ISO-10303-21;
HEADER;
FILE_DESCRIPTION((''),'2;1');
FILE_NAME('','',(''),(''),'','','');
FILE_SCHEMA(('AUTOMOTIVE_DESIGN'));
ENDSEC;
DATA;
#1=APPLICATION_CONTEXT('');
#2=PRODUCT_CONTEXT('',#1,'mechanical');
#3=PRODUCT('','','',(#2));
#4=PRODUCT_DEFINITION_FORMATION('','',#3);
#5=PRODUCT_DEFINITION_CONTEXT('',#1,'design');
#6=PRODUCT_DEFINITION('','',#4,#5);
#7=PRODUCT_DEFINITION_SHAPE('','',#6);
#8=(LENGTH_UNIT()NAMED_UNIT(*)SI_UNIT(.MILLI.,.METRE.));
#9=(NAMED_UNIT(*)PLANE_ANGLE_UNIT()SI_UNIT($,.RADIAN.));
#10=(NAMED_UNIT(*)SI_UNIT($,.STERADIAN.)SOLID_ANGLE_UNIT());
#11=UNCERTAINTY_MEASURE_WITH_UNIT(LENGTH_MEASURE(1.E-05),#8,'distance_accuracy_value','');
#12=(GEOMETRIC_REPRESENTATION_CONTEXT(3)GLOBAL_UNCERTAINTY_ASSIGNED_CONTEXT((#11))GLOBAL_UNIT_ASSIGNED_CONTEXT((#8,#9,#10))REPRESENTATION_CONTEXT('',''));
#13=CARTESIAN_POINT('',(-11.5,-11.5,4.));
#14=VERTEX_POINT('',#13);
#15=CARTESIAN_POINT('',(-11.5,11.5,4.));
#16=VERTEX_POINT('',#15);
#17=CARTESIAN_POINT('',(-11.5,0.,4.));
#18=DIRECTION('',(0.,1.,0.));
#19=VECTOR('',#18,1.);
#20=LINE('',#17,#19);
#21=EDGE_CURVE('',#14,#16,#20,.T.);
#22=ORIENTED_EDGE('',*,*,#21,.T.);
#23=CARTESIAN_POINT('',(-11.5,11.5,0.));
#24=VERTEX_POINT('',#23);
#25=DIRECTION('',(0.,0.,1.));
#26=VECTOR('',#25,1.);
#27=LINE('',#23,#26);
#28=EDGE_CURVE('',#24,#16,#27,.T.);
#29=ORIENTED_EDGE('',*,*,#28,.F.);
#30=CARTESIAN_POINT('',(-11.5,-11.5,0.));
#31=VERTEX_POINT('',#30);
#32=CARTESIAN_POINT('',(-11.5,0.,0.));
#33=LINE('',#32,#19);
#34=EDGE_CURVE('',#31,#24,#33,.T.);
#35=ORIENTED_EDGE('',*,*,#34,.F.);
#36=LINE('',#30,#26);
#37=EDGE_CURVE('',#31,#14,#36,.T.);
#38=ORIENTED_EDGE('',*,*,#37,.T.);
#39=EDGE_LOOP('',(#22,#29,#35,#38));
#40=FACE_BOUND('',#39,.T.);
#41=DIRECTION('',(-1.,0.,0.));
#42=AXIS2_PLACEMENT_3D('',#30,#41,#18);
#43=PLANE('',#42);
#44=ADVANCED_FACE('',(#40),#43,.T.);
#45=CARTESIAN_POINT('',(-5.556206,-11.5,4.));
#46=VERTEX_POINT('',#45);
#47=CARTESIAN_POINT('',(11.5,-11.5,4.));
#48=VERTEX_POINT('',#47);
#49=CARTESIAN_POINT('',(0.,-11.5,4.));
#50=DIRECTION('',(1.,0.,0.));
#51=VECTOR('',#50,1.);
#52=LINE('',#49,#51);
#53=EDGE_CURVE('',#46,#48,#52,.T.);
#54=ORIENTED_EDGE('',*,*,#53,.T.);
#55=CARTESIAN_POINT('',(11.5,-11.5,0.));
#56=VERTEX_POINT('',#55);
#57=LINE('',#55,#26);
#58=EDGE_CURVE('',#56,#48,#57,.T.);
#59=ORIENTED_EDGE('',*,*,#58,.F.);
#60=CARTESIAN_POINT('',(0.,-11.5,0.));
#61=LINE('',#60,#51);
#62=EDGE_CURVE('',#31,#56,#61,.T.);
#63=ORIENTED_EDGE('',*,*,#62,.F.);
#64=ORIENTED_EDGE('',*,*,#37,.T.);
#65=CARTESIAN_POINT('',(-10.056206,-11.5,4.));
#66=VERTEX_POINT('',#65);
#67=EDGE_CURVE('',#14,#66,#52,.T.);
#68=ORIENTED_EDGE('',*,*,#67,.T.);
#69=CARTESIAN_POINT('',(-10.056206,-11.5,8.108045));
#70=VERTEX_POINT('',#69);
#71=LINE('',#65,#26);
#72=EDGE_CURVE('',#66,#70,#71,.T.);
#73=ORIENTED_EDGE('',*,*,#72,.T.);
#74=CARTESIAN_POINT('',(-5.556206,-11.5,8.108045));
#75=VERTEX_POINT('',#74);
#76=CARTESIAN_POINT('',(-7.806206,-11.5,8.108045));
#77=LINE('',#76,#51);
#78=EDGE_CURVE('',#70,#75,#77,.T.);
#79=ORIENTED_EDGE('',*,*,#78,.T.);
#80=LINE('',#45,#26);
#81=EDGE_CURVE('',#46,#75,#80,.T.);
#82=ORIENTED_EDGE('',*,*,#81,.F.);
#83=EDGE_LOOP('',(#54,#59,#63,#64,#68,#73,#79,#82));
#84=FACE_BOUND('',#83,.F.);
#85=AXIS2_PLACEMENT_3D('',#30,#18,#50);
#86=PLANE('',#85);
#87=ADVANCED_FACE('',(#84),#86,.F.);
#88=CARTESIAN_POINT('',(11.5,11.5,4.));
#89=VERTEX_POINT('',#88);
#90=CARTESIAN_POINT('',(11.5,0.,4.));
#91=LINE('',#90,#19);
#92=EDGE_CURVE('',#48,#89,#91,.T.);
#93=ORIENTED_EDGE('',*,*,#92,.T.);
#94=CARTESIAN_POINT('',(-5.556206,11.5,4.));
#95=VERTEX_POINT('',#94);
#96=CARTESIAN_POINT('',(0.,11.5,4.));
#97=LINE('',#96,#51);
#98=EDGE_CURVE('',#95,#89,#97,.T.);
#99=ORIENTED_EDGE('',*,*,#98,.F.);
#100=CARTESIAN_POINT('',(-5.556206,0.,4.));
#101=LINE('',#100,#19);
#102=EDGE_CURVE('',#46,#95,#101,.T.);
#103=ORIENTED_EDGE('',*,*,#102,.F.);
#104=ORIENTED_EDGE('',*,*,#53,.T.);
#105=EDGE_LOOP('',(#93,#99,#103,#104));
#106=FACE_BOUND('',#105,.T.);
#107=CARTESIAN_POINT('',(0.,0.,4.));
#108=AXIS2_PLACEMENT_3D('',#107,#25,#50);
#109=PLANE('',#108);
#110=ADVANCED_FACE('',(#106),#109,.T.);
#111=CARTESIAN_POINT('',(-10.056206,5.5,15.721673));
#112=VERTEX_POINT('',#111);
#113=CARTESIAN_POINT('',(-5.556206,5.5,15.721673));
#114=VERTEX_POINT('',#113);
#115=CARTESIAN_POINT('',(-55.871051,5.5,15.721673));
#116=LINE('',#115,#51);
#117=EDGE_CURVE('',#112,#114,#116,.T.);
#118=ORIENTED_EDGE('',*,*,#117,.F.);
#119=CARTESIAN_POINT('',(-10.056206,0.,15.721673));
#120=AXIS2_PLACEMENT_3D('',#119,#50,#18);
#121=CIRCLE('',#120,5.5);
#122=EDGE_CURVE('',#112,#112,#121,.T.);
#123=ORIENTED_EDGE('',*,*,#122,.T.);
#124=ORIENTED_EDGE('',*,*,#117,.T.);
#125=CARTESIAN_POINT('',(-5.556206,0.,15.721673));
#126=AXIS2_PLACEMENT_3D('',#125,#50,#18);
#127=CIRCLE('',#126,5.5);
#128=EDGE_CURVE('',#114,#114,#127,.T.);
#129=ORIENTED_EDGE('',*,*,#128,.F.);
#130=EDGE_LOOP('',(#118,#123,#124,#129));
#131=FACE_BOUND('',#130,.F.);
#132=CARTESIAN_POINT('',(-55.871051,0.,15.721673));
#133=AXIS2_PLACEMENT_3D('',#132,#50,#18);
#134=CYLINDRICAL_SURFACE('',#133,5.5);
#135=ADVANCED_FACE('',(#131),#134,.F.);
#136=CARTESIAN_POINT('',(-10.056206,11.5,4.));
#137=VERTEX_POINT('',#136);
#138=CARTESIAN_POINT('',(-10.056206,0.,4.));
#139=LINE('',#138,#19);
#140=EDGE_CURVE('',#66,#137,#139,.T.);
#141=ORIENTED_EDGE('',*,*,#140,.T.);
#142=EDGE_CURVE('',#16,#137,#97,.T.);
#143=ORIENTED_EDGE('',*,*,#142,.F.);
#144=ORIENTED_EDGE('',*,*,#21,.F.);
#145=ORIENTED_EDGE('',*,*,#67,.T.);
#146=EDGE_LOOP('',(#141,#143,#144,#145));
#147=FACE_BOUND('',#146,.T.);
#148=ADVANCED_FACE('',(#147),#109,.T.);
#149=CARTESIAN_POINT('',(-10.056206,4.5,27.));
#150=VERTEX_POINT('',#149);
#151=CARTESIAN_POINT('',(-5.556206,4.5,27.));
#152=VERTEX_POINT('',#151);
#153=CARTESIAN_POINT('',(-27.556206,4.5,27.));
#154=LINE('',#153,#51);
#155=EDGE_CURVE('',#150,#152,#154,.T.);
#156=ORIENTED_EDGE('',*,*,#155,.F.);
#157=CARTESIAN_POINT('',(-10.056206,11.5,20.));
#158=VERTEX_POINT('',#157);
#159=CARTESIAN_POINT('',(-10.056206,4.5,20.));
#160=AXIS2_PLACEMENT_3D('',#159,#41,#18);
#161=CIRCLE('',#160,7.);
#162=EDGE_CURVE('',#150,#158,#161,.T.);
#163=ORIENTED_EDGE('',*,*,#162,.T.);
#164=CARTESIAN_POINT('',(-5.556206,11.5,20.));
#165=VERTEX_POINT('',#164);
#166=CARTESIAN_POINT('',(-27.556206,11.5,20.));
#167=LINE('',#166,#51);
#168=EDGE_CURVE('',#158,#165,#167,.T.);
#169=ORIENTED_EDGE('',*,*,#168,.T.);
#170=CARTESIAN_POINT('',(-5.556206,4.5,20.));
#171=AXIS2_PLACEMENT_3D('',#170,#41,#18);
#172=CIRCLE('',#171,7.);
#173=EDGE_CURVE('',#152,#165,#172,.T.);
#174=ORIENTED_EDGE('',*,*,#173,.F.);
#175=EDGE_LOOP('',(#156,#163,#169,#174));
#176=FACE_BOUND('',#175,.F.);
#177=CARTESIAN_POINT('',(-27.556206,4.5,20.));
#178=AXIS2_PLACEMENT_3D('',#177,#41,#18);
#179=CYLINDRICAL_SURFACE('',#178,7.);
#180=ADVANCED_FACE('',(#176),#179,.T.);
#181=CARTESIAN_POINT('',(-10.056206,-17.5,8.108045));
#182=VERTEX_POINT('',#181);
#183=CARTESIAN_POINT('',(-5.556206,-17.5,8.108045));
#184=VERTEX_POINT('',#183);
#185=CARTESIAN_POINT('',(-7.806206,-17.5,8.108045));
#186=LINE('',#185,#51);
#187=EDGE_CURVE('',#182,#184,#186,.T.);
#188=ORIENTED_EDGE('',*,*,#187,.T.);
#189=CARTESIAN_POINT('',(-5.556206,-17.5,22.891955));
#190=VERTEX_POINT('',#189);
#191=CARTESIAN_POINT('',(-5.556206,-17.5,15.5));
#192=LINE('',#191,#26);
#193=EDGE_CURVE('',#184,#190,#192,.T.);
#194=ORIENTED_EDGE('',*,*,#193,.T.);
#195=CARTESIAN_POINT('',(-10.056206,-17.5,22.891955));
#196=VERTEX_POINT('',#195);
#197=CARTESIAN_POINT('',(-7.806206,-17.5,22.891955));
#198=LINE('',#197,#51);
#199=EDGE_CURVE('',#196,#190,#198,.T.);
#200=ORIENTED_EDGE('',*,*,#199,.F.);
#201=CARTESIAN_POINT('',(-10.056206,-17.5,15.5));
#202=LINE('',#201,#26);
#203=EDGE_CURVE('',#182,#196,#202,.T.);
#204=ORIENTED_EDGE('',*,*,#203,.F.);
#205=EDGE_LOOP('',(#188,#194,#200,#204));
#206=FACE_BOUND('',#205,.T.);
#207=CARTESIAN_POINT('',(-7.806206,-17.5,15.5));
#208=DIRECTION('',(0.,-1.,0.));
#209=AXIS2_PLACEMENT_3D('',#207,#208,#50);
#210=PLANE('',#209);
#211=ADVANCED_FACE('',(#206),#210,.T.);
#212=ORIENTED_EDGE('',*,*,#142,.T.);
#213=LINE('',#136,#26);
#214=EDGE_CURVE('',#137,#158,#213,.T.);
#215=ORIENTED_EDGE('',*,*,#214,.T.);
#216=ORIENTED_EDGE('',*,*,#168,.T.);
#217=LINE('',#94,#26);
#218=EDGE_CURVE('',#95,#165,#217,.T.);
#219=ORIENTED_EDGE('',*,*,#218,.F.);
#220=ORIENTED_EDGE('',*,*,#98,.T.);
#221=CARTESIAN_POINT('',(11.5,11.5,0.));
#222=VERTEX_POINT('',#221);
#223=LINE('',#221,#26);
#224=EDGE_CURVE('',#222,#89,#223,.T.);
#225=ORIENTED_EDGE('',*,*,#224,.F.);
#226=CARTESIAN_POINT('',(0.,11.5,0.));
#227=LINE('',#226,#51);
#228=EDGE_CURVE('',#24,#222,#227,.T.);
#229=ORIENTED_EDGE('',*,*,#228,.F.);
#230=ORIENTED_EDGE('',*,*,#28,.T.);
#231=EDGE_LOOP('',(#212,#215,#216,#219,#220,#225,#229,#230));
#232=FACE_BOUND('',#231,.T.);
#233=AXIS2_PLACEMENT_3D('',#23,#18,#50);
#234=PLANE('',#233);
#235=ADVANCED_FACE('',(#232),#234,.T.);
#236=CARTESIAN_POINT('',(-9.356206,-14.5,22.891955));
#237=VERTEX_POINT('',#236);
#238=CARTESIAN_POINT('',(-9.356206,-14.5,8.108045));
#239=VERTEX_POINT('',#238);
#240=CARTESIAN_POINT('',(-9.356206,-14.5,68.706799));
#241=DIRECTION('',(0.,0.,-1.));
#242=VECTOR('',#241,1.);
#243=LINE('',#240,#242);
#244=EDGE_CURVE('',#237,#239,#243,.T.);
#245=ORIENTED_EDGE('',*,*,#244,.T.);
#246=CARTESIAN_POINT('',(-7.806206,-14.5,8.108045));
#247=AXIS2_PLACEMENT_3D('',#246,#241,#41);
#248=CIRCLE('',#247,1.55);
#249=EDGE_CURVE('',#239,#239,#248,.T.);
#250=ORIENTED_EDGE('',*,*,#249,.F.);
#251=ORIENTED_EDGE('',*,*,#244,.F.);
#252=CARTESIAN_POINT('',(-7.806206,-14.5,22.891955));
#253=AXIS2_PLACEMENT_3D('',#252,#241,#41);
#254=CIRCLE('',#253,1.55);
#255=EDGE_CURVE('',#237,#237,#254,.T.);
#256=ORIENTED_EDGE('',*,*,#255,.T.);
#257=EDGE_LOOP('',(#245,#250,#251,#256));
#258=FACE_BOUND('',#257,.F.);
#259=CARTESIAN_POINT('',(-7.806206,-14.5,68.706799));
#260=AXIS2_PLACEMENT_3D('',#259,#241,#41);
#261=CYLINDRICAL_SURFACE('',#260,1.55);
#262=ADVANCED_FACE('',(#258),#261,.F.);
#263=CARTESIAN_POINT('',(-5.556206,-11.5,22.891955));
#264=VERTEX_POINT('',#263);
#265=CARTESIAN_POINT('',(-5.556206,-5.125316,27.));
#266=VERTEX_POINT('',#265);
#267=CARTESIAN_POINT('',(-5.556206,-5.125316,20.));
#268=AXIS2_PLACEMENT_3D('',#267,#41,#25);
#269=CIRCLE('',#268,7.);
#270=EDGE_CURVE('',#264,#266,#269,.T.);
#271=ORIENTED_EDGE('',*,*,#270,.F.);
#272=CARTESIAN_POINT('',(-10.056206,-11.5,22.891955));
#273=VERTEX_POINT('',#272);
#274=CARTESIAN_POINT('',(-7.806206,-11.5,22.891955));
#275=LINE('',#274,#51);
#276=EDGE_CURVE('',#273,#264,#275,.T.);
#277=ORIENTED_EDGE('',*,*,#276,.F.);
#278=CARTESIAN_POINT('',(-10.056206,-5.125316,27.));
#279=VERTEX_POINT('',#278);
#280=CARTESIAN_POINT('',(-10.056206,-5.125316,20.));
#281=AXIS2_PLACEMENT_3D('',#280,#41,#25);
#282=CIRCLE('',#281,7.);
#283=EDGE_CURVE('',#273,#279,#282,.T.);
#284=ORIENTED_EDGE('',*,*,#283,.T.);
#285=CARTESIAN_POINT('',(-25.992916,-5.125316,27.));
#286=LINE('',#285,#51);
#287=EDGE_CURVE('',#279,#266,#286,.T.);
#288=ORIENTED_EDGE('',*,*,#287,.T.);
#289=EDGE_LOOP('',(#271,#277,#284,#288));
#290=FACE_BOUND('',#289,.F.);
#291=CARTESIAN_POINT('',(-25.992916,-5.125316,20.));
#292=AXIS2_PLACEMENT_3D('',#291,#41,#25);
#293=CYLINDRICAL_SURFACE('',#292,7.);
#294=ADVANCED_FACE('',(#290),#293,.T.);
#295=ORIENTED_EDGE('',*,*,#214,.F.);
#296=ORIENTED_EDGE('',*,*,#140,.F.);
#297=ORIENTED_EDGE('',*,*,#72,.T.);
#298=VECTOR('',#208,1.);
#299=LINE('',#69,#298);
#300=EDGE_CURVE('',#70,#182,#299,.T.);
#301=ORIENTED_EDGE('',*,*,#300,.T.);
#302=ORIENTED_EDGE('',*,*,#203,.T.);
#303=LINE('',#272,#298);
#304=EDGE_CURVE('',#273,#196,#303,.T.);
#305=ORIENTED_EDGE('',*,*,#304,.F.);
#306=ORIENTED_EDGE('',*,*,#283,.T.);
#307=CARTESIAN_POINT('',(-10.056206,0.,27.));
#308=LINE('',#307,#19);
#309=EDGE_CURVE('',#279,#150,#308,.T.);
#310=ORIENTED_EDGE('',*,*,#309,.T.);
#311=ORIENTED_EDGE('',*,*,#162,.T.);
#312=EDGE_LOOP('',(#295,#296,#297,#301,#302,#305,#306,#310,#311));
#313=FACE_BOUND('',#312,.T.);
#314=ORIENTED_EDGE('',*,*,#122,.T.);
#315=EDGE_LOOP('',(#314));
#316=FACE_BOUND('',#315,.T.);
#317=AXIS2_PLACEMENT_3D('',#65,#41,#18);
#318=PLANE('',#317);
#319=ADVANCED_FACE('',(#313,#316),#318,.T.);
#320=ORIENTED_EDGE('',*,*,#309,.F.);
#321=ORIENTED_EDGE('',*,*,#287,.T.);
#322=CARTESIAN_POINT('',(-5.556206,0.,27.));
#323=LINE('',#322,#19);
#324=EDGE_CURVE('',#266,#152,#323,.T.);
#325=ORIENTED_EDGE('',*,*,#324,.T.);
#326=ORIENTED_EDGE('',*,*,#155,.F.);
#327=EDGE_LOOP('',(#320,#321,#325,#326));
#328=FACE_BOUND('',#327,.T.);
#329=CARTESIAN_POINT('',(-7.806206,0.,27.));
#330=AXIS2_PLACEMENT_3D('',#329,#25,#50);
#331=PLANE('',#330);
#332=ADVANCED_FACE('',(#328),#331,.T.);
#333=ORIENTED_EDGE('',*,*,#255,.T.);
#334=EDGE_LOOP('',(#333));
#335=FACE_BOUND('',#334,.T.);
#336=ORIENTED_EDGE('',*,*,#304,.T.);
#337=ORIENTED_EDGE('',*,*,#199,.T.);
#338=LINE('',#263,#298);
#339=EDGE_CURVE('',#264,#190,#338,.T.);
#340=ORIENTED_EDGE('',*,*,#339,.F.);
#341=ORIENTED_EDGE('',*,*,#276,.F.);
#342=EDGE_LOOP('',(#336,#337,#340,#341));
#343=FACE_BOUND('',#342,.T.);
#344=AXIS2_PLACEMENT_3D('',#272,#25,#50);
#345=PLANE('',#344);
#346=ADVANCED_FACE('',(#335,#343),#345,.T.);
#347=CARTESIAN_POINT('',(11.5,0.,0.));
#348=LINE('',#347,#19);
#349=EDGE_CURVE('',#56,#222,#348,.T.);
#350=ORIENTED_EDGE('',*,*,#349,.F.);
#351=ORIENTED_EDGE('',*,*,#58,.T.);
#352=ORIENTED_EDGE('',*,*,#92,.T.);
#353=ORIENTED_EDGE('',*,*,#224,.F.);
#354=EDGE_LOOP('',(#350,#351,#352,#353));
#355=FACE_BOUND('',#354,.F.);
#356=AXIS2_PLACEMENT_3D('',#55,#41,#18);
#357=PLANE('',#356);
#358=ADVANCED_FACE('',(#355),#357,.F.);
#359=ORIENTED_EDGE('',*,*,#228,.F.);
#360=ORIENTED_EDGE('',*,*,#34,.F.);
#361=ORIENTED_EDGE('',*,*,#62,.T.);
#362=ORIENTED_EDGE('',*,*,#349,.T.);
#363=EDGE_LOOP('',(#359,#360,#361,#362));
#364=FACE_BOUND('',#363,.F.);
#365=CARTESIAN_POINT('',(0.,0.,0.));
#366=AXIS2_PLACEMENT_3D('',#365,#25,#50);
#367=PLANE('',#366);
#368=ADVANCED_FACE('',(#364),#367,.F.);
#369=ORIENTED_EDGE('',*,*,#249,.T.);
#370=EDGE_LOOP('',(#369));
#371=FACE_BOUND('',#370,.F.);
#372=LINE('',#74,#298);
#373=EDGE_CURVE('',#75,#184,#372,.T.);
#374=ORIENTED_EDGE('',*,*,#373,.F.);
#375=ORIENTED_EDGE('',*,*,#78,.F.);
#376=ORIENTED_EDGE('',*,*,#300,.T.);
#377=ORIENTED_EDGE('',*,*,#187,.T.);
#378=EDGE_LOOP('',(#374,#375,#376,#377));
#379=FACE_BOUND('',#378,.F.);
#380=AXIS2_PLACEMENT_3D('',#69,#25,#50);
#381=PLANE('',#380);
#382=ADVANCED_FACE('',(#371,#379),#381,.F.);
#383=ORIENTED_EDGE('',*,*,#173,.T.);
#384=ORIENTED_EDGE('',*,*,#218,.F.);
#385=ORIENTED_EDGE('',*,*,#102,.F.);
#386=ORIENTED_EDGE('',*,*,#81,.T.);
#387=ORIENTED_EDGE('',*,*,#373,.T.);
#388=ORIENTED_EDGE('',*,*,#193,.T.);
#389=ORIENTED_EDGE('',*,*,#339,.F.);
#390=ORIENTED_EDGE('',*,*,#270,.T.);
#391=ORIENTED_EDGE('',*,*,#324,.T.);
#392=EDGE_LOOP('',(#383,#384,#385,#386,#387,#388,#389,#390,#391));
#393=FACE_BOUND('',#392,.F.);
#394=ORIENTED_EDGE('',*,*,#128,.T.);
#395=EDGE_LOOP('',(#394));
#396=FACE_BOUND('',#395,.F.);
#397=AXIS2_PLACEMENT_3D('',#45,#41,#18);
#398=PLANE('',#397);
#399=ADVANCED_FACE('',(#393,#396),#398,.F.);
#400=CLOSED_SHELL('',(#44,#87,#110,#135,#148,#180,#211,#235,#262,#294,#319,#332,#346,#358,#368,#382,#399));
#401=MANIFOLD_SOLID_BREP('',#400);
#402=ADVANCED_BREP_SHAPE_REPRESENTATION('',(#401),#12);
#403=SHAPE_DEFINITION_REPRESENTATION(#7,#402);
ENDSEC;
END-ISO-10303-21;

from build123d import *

# Parameters (mm, degrees)
F0_W         = 23
F0_H         = 23
F1_DEPTH     = 4
F2_W         = 4.5
F2_H         = 23
F3_DEPTH     = 23
F4_W         = 4.5
F4_H         = 14.783909363
F5_DEPTH     = 6
F7_D         = 11
F9_D         = 3.1
F10_T1_DEPTH = 39.5
F10_T3_DEPTH = 36.3734207923


# Not quite as in the source:
# - a fillet or chamfer that OpenCascade refuses, or shapes differently, is made with other operations: its cross-section is extruded or revolved along the edge and cut away or added


with BuildPart() as f1:
    # F0 (on Top) → F1 (new body)
    with BuildSketch(Plane.XY):
        Rectangle(F0_W, F0_H)
    extrude(amount=F1_DEPTH)

    # F2 (on face) → F3 (join)
    with BuildSketch(Plane.XY.offset(4)):
        with Locations((-7.8062060252, 0)):
            Rectangle(F2_W, F2_H)
    extrude(amount=F3_DEPTH)

    # F4 (on face) → F5 (join)
    with BuildSketch(Plane.XZ.offset(11.5)):
        with Locations((-7.8062060252, 15.5)):
            Rectangle(F4_W, F4_H)
    extrude(amount=F5_DEPTH)

    # F7 (through all)
    with Locations(Plane(origin=(-10.0562060252, 0, 0), x_dir=(0, -1, 0), z_dir=(-1, 0, 0))):
        with Locations((0, 15.7216731459)):
            Hole(F7_D / 2)

    # F9 (through all)
    with Locations(Plane.XY.offset(22.8919546815)):
        with Locations((-7.8062060252, -14.5)):
            Hole(F9_D / 2)

    # F10: fillet of radius 7 on 2 edges, made by hand

    # F10_s2 → F10_t1 (cut)
    with BuildSketch(Plane.YZ.offset(-27.5562060252)):
        with BuildLine():
            ThreePointArc((11.5, 20), (9.4497474683, 24.9497474683), (4.5, 27))
            Line((4.5, 27), (11.5, 27))
            Line((11.5, 27), (11.5, 20))
        make_face()
    extrude(amount=F10_T1_DEPTH, mode=Mode.SUBTRACT)

    # F10_s4 → F10_t3 (cut)
    with BuildSketch(Plane.YZ.offset(-25.9929164214)):
        with BuildLine():
            ThreePointArc((-5.1253158415, 27), (-8.9171700865, 25.8840327485), (-11.5, 22.8919546815))
            Line((-11.5, 22.8919546815), (-11.5, 27))
            Line((-11.5, 27), (-5.1253158415, 27))
        make_face()
    extrude(amount=F10_T3_DEPTH, mode=Mode.SUBTRACT)


solid = f1.part
